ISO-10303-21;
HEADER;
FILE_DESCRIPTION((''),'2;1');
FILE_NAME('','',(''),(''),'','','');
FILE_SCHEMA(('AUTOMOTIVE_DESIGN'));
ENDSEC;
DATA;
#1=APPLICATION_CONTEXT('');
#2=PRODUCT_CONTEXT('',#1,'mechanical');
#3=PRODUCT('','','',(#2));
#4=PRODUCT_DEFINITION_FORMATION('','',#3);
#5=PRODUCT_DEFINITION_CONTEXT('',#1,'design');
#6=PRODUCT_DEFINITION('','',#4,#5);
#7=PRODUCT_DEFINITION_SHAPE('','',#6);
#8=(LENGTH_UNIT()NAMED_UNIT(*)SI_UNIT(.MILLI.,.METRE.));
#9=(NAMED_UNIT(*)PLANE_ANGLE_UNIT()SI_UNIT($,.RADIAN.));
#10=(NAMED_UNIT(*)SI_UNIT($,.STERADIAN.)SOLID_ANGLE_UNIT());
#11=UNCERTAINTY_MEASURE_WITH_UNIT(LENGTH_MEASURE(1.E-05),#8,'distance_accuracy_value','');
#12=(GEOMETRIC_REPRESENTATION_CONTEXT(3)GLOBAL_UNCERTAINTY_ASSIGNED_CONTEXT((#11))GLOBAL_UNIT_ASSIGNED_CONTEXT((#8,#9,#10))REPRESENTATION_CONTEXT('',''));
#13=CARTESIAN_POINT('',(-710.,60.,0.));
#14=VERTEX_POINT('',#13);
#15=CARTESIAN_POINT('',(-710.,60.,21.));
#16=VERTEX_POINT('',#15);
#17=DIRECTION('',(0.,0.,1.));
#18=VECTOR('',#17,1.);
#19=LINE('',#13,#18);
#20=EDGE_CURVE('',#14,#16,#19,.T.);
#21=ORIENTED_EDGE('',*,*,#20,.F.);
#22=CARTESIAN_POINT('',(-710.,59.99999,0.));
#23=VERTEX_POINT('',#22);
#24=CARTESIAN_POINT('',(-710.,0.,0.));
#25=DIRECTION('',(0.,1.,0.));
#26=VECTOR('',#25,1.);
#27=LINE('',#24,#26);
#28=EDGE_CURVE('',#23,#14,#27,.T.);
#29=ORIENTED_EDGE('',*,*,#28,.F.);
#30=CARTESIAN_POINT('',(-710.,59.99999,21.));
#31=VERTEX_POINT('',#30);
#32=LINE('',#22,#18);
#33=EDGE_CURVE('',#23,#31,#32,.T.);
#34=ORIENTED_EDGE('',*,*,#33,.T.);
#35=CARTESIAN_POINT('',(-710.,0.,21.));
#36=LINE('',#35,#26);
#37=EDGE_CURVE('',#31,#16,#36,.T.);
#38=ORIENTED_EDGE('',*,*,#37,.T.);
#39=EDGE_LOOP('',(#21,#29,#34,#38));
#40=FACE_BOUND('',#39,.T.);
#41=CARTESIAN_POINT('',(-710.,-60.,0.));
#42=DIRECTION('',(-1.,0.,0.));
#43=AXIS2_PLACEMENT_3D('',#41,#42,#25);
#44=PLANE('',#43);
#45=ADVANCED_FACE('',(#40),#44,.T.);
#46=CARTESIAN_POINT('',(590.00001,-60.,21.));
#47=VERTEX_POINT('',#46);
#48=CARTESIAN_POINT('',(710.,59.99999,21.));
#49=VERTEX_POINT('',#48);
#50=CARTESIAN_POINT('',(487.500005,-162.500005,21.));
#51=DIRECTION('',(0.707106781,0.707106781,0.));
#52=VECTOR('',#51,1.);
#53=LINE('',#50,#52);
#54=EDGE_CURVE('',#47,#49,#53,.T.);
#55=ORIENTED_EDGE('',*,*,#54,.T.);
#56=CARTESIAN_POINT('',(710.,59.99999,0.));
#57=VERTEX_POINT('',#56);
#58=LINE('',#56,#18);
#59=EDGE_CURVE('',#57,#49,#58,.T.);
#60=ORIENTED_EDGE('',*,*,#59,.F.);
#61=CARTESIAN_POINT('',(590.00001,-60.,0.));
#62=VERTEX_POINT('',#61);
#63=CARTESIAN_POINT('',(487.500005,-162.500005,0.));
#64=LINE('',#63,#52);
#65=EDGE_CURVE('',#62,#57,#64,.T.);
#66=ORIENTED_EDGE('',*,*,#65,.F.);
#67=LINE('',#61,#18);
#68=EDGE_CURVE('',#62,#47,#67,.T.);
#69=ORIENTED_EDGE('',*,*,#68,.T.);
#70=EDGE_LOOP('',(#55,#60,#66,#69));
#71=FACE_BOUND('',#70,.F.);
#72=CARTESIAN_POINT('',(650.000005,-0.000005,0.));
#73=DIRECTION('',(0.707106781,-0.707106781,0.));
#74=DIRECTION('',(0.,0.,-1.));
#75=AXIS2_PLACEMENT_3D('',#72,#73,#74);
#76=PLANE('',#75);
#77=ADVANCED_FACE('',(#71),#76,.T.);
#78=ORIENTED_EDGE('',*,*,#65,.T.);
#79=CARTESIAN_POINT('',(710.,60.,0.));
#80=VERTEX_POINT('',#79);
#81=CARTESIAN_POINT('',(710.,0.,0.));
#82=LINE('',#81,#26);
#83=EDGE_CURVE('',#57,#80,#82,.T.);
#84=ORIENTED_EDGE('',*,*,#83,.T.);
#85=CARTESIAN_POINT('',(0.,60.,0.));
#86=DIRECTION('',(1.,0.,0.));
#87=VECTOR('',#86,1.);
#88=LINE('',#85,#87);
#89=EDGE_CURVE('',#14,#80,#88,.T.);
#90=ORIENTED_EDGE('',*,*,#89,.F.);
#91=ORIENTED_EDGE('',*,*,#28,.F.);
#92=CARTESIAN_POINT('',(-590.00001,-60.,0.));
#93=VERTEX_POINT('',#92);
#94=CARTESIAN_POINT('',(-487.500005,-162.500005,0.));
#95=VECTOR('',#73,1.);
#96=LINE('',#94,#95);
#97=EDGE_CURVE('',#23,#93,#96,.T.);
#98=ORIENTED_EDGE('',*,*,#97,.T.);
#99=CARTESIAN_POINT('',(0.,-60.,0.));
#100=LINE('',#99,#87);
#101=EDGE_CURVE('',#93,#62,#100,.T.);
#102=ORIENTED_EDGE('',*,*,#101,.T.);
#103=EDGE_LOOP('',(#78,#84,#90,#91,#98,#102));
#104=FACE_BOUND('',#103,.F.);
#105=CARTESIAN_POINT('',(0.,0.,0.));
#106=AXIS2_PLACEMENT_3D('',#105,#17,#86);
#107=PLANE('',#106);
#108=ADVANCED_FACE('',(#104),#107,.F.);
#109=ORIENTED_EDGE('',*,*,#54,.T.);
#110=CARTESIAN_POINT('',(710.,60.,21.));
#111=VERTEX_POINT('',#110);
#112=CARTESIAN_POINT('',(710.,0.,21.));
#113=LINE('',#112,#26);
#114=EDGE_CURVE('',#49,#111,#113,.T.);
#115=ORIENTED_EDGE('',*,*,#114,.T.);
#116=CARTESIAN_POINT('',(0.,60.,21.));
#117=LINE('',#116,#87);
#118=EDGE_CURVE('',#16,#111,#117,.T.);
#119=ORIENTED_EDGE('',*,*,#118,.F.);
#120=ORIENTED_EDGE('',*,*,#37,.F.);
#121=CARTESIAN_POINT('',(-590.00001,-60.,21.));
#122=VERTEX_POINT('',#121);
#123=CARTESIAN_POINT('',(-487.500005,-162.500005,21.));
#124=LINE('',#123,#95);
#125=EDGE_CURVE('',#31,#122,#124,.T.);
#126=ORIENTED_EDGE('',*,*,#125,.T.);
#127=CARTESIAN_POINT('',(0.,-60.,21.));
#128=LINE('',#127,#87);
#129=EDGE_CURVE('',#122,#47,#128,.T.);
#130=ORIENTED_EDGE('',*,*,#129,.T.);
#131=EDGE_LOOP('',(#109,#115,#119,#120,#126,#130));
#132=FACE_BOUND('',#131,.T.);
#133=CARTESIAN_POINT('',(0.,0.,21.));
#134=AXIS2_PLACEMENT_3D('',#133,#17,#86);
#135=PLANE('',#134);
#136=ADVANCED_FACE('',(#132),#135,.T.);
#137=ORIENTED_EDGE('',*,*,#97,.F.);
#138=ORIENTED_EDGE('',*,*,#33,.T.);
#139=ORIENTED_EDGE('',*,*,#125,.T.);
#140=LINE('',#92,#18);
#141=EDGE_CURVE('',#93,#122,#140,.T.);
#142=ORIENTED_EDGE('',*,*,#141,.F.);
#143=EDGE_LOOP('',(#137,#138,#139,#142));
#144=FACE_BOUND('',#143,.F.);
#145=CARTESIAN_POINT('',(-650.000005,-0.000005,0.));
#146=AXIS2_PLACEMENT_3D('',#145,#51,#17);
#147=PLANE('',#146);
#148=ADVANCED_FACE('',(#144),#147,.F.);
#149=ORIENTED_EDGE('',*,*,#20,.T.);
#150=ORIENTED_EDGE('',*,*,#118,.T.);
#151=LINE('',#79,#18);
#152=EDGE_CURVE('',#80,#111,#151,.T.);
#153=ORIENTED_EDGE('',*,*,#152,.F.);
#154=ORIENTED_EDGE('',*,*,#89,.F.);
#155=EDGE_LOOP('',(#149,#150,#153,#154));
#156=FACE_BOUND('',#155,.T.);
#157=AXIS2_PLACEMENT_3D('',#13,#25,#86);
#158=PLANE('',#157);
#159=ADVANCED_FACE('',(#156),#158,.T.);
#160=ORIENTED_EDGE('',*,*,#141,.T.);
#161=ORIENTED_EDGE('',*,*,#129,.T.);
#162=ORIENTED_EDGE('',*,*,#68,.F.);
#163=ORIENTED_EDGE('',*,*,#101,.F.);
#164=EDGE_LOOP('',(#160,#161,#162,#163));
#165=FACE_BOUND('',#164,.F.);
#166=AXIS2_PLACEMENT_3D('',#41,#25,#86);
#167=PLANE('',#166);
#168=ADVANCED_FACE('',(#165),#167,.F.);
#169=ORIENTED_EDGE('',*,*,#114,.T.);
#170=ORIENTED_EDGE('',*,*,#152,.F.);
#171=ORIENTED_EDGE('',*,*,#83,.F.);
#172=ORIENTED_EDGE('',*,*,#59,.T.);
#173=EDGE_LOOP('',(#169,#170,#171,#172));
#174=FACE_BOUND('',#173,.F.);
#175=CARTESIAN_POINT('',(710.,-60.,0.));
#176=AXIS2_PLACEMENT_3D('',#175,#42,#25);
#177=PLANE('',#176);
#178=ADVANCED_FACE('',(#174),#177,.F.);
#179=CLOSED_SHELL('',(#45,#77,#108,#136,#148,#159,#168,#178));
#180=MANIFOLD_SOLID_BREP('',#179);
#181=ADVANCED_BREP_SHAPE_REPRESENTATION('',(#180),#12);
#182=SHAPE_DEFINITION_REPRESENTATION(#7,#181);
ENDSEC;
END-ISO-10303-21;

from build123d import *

# Parameters (mm, degrees)
F0_W     = 1420
F0_H     = 120
F1_DEPTH = 21
F2_SIZE  = 119.99999


# Not quite as in the source:
# - a fillet or chamfer is up to 0.001 mm smaller than in the source, because OpenCascade refuses the exact size


with BuildPart() as f1:
    # F0 (on Top) → F1 (new body)
    with BuildSketch(Plane.XY):
        Rectangle(F0_W, F0_H)
    extrude(amount=F1_DEPTH)

    # F2 (size 120 in the source; OpenCascade refuses exactly that, so slightly less here)
    f2_edges = [f1.edges().sort_by_distance(p)[0] for p in [
        (-710, -60, 10.5),
        (710, -60, 10.5),
    ]]
    chamfer(f2_edges, length=F2_SIZE)


solid = f1.part
